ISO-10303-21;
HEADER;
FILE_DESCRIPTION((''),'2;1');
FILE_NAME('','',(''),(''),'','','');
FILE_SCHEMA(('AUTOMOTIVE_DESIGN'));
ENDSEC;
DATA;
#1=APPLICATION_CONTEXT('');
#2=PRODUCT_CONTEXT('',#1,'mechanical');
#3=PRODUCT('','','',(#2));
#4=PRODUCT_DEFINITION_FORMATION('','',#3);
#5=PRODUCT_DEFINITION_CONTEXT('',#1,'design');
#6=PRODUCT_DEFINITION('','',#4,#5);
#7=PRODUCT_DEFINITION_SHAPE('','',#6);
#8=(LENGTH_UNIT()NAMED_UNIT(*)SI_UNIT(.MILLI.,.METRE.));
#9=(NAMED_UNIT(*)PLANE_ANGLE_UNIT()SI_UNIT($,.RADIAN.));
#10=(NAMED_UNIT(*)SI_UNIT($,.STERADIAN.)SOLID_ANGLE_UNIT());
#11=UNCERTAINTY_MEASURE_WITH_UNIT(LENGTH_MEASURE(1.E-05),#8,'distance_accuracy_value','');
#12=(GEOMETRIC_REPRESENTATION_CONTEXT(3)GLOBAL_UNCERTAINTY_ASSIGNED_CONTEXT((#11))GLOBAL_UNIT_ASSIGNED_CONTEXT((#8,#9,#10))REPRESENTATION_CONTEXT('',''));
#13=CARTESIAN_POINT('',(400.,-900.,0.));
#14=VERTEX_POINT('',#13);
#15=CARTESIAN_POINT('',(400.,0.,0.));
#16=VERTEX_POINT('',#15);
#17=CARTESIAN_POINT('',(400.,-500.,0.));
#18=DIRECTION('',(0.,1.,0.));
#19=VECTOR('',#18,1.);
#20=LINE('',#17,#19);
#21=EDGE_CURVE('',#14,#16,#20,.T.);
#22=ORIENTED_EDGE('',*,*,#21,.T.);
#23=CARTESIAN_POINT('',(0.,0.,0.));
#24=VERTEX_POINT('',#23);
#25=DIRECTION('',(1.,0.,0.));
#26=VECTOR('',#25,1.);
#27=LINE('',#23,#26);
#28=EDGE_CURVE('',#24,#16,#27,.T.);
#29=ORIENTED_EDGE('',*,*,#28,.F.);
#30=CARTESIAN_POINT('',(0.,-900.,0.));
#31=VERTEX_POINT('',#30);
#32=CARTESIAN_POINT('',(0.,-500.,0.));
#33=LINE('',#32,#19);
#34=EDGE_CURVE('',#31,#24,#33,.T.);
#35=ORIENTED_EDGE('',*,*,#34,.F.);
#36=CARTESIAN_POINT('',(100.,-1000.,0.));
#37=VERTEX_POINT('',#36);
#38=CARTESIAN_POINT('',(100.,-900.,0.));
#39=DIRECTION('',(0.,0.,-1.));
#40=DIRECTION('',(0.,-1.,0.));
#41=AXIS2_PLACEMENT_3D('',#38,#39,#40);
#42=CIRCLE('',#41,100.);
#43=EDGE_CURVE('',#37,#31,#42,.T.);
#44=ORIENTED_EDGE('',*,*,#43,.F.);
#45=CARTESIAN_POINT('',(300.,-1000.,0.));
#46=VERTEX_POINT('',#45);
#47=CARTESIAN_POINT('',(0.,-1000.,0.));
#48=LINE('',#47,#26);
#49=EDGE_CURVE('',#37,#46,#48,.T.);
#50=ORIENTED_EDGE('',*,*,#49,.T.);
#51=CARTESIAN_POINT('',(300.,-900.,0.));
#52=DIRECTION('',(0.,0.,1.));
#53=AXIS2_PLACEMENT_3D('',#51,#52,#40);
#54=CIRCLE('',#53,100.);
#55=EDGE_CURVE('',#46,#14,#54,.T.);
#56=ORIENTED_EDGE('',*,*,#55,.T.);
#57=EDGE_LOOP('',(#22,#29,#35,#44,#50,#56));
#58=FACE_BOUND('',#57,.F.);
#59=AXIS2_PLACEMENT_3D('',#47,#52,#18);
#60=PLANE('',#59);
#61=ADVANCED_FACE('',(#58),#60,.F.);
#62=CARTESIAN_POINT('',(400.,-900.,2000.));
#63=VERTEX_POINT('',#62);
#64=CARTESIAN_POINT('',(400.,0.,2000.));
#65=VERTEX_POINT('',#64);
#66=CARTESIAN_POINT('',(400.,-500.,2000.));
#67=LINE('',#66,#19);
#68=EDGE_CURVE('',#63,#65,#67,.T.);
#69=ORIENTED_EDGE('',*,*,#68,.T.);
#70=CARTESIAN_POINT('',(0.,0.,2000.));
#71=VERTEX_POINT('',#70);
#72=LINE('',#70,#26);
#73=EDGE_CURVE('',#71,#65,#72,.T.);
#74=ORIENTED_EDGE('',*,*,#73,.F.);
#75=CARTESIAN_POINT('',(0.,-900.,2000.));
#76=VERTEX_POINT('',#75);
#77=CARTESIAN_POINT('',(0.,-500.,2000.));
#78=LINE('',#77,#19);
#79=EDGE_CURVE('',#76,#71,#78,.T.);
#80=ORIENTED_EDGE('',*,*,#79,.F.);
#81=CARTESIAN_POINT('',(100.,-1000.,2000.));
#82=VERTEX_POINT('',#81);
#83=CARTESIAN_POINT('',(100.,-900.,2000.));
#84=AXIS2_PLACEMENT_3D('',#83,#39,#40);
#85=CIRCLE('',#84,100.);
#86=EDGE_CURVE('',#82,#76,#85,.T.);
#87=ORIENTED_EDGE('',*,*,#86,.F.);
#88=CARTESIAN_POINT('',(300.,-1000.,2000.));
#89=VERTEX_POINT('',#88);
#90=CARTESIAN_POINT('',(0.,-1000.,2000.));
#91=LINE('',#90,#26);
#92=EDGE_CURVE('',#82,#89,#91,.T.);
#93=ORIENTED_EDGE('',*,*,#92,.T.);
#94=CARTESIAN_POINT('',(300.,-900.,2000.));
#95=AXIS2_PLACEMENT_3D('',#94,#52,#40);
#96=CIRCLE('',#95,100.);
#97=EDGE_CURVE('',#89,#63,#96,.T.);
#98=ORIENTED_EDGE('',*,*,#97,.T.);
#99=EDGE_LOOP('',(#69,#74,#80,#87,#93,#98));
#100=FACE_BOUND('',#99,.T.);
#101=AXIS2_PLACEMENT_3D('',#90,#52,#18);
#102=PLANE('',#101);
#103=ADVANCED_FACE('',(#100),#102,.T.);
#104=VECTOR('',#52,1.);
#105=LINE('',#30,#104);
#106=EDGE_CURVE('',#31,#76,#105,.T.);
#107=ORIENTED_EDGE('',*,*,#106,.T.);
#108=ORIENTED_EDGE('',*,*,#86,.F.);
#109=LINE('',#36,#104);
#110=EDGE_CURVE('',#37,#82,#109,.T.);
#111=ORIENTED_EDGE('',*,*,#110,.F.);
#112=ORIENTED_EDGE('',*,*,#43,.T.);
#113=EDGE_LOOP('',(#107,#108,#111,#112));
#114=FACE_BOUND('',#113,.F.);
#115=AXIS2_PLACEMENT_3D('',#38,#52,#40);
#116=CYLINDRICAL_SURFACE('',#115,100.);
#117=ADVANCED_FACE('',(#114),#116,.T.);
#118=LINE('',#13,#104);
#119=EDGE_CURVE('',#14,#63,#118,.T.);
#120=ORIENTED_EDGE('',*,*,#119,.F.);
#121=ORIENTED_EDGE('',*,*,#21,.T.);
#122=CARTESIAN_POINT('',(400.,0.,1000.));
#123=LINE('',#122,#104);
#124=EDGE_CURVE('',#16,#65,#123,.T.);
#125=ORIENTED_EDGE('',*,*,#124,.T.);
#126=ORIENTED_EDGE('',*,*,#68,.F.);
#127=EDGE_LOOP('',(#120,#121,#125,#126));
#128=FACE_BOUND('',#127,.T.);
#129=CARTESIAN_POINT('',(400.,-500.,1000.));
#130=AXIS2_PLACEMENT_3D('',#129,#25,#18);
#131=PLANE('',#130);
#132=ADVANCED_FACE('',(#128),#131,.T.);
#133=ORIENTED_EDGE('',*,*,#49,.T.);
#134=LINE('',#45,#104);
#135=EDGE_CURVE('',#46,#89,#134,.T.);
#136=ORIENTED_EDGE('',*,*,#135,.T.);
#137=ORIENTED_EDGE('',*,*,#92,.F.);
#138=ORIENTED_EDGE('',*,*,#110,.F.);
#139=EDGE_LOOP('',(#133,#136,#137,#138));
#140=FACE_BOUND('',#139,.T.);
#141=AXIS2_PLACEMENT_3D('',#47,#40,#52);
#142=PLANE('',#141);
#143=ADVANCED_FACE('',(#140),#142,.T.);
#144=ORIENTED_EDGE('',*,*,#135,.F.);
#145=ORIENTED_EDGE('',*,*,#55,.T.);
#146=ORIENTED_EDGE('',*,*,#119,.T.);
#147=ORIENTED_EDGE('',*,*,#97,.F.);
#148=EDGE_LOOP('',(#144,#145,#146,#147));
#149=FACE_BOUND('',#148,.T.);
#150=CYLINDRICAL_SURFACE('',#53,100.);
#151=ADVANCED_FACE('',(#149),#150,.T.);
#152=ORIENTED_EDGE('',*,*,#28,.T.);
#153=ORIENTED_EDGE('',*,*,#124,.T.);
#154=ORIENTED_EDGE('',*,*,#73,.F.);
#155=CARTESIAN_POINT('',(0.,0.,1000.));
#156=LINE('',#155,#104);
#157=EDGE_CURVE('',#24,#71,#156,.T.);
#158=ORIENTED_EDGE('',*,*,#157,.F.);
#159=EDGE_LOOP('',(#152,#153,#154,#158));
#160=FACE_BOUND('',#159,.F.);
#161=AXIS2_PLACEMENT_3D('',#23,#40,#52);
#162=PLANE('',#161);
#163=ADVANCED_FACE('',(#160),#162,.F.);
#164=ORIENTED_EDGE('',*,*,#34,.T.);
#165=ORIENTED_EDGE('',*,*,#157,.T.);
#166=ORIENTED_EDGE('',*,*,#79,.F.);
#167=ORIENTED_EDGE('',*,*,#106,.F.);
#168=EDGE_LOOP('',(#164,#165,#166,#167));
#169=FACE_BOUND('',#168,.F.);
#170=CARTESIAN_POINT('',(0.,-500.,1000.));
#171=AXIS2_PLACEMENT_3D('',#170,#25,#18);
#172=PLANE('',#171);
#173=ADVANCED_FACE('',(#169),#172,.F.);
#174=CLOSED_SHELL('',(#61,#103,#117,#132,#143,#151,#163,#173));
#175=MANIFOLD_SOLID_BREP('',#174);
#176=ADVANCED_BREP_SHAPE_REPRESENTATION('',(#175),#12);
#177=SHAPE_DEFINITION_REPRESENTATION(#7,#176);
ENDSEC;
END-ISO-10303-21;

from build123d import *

# Parameters (mm, degrees)
F0_W     = 1000
F0_H     = 2000
F1_DEPTH = 400
F2_R     = 100


# Not quite as in the source:
# - a feature of the source that left no trace in its solid (it failed there, or was rolled back) is left out


with BuildPart() as f1:
    # F0 (on Right) → F1 (new body)
    with BuildSketch(Plane.YZ):
        with Locations((-500, 1000)):
            Rectangle(F0_W, F0_H)
    extrude(amount=F1_DEPTH)

    # F2
    f2_edges = [f1.edges().sort_by_distance(p)[0] for p in [
        (0, -1000, 1000),
        (400, -1000, 1000),
    ]]
    fillet(f2_edges, radius=F2_R)


solid = f1.part
